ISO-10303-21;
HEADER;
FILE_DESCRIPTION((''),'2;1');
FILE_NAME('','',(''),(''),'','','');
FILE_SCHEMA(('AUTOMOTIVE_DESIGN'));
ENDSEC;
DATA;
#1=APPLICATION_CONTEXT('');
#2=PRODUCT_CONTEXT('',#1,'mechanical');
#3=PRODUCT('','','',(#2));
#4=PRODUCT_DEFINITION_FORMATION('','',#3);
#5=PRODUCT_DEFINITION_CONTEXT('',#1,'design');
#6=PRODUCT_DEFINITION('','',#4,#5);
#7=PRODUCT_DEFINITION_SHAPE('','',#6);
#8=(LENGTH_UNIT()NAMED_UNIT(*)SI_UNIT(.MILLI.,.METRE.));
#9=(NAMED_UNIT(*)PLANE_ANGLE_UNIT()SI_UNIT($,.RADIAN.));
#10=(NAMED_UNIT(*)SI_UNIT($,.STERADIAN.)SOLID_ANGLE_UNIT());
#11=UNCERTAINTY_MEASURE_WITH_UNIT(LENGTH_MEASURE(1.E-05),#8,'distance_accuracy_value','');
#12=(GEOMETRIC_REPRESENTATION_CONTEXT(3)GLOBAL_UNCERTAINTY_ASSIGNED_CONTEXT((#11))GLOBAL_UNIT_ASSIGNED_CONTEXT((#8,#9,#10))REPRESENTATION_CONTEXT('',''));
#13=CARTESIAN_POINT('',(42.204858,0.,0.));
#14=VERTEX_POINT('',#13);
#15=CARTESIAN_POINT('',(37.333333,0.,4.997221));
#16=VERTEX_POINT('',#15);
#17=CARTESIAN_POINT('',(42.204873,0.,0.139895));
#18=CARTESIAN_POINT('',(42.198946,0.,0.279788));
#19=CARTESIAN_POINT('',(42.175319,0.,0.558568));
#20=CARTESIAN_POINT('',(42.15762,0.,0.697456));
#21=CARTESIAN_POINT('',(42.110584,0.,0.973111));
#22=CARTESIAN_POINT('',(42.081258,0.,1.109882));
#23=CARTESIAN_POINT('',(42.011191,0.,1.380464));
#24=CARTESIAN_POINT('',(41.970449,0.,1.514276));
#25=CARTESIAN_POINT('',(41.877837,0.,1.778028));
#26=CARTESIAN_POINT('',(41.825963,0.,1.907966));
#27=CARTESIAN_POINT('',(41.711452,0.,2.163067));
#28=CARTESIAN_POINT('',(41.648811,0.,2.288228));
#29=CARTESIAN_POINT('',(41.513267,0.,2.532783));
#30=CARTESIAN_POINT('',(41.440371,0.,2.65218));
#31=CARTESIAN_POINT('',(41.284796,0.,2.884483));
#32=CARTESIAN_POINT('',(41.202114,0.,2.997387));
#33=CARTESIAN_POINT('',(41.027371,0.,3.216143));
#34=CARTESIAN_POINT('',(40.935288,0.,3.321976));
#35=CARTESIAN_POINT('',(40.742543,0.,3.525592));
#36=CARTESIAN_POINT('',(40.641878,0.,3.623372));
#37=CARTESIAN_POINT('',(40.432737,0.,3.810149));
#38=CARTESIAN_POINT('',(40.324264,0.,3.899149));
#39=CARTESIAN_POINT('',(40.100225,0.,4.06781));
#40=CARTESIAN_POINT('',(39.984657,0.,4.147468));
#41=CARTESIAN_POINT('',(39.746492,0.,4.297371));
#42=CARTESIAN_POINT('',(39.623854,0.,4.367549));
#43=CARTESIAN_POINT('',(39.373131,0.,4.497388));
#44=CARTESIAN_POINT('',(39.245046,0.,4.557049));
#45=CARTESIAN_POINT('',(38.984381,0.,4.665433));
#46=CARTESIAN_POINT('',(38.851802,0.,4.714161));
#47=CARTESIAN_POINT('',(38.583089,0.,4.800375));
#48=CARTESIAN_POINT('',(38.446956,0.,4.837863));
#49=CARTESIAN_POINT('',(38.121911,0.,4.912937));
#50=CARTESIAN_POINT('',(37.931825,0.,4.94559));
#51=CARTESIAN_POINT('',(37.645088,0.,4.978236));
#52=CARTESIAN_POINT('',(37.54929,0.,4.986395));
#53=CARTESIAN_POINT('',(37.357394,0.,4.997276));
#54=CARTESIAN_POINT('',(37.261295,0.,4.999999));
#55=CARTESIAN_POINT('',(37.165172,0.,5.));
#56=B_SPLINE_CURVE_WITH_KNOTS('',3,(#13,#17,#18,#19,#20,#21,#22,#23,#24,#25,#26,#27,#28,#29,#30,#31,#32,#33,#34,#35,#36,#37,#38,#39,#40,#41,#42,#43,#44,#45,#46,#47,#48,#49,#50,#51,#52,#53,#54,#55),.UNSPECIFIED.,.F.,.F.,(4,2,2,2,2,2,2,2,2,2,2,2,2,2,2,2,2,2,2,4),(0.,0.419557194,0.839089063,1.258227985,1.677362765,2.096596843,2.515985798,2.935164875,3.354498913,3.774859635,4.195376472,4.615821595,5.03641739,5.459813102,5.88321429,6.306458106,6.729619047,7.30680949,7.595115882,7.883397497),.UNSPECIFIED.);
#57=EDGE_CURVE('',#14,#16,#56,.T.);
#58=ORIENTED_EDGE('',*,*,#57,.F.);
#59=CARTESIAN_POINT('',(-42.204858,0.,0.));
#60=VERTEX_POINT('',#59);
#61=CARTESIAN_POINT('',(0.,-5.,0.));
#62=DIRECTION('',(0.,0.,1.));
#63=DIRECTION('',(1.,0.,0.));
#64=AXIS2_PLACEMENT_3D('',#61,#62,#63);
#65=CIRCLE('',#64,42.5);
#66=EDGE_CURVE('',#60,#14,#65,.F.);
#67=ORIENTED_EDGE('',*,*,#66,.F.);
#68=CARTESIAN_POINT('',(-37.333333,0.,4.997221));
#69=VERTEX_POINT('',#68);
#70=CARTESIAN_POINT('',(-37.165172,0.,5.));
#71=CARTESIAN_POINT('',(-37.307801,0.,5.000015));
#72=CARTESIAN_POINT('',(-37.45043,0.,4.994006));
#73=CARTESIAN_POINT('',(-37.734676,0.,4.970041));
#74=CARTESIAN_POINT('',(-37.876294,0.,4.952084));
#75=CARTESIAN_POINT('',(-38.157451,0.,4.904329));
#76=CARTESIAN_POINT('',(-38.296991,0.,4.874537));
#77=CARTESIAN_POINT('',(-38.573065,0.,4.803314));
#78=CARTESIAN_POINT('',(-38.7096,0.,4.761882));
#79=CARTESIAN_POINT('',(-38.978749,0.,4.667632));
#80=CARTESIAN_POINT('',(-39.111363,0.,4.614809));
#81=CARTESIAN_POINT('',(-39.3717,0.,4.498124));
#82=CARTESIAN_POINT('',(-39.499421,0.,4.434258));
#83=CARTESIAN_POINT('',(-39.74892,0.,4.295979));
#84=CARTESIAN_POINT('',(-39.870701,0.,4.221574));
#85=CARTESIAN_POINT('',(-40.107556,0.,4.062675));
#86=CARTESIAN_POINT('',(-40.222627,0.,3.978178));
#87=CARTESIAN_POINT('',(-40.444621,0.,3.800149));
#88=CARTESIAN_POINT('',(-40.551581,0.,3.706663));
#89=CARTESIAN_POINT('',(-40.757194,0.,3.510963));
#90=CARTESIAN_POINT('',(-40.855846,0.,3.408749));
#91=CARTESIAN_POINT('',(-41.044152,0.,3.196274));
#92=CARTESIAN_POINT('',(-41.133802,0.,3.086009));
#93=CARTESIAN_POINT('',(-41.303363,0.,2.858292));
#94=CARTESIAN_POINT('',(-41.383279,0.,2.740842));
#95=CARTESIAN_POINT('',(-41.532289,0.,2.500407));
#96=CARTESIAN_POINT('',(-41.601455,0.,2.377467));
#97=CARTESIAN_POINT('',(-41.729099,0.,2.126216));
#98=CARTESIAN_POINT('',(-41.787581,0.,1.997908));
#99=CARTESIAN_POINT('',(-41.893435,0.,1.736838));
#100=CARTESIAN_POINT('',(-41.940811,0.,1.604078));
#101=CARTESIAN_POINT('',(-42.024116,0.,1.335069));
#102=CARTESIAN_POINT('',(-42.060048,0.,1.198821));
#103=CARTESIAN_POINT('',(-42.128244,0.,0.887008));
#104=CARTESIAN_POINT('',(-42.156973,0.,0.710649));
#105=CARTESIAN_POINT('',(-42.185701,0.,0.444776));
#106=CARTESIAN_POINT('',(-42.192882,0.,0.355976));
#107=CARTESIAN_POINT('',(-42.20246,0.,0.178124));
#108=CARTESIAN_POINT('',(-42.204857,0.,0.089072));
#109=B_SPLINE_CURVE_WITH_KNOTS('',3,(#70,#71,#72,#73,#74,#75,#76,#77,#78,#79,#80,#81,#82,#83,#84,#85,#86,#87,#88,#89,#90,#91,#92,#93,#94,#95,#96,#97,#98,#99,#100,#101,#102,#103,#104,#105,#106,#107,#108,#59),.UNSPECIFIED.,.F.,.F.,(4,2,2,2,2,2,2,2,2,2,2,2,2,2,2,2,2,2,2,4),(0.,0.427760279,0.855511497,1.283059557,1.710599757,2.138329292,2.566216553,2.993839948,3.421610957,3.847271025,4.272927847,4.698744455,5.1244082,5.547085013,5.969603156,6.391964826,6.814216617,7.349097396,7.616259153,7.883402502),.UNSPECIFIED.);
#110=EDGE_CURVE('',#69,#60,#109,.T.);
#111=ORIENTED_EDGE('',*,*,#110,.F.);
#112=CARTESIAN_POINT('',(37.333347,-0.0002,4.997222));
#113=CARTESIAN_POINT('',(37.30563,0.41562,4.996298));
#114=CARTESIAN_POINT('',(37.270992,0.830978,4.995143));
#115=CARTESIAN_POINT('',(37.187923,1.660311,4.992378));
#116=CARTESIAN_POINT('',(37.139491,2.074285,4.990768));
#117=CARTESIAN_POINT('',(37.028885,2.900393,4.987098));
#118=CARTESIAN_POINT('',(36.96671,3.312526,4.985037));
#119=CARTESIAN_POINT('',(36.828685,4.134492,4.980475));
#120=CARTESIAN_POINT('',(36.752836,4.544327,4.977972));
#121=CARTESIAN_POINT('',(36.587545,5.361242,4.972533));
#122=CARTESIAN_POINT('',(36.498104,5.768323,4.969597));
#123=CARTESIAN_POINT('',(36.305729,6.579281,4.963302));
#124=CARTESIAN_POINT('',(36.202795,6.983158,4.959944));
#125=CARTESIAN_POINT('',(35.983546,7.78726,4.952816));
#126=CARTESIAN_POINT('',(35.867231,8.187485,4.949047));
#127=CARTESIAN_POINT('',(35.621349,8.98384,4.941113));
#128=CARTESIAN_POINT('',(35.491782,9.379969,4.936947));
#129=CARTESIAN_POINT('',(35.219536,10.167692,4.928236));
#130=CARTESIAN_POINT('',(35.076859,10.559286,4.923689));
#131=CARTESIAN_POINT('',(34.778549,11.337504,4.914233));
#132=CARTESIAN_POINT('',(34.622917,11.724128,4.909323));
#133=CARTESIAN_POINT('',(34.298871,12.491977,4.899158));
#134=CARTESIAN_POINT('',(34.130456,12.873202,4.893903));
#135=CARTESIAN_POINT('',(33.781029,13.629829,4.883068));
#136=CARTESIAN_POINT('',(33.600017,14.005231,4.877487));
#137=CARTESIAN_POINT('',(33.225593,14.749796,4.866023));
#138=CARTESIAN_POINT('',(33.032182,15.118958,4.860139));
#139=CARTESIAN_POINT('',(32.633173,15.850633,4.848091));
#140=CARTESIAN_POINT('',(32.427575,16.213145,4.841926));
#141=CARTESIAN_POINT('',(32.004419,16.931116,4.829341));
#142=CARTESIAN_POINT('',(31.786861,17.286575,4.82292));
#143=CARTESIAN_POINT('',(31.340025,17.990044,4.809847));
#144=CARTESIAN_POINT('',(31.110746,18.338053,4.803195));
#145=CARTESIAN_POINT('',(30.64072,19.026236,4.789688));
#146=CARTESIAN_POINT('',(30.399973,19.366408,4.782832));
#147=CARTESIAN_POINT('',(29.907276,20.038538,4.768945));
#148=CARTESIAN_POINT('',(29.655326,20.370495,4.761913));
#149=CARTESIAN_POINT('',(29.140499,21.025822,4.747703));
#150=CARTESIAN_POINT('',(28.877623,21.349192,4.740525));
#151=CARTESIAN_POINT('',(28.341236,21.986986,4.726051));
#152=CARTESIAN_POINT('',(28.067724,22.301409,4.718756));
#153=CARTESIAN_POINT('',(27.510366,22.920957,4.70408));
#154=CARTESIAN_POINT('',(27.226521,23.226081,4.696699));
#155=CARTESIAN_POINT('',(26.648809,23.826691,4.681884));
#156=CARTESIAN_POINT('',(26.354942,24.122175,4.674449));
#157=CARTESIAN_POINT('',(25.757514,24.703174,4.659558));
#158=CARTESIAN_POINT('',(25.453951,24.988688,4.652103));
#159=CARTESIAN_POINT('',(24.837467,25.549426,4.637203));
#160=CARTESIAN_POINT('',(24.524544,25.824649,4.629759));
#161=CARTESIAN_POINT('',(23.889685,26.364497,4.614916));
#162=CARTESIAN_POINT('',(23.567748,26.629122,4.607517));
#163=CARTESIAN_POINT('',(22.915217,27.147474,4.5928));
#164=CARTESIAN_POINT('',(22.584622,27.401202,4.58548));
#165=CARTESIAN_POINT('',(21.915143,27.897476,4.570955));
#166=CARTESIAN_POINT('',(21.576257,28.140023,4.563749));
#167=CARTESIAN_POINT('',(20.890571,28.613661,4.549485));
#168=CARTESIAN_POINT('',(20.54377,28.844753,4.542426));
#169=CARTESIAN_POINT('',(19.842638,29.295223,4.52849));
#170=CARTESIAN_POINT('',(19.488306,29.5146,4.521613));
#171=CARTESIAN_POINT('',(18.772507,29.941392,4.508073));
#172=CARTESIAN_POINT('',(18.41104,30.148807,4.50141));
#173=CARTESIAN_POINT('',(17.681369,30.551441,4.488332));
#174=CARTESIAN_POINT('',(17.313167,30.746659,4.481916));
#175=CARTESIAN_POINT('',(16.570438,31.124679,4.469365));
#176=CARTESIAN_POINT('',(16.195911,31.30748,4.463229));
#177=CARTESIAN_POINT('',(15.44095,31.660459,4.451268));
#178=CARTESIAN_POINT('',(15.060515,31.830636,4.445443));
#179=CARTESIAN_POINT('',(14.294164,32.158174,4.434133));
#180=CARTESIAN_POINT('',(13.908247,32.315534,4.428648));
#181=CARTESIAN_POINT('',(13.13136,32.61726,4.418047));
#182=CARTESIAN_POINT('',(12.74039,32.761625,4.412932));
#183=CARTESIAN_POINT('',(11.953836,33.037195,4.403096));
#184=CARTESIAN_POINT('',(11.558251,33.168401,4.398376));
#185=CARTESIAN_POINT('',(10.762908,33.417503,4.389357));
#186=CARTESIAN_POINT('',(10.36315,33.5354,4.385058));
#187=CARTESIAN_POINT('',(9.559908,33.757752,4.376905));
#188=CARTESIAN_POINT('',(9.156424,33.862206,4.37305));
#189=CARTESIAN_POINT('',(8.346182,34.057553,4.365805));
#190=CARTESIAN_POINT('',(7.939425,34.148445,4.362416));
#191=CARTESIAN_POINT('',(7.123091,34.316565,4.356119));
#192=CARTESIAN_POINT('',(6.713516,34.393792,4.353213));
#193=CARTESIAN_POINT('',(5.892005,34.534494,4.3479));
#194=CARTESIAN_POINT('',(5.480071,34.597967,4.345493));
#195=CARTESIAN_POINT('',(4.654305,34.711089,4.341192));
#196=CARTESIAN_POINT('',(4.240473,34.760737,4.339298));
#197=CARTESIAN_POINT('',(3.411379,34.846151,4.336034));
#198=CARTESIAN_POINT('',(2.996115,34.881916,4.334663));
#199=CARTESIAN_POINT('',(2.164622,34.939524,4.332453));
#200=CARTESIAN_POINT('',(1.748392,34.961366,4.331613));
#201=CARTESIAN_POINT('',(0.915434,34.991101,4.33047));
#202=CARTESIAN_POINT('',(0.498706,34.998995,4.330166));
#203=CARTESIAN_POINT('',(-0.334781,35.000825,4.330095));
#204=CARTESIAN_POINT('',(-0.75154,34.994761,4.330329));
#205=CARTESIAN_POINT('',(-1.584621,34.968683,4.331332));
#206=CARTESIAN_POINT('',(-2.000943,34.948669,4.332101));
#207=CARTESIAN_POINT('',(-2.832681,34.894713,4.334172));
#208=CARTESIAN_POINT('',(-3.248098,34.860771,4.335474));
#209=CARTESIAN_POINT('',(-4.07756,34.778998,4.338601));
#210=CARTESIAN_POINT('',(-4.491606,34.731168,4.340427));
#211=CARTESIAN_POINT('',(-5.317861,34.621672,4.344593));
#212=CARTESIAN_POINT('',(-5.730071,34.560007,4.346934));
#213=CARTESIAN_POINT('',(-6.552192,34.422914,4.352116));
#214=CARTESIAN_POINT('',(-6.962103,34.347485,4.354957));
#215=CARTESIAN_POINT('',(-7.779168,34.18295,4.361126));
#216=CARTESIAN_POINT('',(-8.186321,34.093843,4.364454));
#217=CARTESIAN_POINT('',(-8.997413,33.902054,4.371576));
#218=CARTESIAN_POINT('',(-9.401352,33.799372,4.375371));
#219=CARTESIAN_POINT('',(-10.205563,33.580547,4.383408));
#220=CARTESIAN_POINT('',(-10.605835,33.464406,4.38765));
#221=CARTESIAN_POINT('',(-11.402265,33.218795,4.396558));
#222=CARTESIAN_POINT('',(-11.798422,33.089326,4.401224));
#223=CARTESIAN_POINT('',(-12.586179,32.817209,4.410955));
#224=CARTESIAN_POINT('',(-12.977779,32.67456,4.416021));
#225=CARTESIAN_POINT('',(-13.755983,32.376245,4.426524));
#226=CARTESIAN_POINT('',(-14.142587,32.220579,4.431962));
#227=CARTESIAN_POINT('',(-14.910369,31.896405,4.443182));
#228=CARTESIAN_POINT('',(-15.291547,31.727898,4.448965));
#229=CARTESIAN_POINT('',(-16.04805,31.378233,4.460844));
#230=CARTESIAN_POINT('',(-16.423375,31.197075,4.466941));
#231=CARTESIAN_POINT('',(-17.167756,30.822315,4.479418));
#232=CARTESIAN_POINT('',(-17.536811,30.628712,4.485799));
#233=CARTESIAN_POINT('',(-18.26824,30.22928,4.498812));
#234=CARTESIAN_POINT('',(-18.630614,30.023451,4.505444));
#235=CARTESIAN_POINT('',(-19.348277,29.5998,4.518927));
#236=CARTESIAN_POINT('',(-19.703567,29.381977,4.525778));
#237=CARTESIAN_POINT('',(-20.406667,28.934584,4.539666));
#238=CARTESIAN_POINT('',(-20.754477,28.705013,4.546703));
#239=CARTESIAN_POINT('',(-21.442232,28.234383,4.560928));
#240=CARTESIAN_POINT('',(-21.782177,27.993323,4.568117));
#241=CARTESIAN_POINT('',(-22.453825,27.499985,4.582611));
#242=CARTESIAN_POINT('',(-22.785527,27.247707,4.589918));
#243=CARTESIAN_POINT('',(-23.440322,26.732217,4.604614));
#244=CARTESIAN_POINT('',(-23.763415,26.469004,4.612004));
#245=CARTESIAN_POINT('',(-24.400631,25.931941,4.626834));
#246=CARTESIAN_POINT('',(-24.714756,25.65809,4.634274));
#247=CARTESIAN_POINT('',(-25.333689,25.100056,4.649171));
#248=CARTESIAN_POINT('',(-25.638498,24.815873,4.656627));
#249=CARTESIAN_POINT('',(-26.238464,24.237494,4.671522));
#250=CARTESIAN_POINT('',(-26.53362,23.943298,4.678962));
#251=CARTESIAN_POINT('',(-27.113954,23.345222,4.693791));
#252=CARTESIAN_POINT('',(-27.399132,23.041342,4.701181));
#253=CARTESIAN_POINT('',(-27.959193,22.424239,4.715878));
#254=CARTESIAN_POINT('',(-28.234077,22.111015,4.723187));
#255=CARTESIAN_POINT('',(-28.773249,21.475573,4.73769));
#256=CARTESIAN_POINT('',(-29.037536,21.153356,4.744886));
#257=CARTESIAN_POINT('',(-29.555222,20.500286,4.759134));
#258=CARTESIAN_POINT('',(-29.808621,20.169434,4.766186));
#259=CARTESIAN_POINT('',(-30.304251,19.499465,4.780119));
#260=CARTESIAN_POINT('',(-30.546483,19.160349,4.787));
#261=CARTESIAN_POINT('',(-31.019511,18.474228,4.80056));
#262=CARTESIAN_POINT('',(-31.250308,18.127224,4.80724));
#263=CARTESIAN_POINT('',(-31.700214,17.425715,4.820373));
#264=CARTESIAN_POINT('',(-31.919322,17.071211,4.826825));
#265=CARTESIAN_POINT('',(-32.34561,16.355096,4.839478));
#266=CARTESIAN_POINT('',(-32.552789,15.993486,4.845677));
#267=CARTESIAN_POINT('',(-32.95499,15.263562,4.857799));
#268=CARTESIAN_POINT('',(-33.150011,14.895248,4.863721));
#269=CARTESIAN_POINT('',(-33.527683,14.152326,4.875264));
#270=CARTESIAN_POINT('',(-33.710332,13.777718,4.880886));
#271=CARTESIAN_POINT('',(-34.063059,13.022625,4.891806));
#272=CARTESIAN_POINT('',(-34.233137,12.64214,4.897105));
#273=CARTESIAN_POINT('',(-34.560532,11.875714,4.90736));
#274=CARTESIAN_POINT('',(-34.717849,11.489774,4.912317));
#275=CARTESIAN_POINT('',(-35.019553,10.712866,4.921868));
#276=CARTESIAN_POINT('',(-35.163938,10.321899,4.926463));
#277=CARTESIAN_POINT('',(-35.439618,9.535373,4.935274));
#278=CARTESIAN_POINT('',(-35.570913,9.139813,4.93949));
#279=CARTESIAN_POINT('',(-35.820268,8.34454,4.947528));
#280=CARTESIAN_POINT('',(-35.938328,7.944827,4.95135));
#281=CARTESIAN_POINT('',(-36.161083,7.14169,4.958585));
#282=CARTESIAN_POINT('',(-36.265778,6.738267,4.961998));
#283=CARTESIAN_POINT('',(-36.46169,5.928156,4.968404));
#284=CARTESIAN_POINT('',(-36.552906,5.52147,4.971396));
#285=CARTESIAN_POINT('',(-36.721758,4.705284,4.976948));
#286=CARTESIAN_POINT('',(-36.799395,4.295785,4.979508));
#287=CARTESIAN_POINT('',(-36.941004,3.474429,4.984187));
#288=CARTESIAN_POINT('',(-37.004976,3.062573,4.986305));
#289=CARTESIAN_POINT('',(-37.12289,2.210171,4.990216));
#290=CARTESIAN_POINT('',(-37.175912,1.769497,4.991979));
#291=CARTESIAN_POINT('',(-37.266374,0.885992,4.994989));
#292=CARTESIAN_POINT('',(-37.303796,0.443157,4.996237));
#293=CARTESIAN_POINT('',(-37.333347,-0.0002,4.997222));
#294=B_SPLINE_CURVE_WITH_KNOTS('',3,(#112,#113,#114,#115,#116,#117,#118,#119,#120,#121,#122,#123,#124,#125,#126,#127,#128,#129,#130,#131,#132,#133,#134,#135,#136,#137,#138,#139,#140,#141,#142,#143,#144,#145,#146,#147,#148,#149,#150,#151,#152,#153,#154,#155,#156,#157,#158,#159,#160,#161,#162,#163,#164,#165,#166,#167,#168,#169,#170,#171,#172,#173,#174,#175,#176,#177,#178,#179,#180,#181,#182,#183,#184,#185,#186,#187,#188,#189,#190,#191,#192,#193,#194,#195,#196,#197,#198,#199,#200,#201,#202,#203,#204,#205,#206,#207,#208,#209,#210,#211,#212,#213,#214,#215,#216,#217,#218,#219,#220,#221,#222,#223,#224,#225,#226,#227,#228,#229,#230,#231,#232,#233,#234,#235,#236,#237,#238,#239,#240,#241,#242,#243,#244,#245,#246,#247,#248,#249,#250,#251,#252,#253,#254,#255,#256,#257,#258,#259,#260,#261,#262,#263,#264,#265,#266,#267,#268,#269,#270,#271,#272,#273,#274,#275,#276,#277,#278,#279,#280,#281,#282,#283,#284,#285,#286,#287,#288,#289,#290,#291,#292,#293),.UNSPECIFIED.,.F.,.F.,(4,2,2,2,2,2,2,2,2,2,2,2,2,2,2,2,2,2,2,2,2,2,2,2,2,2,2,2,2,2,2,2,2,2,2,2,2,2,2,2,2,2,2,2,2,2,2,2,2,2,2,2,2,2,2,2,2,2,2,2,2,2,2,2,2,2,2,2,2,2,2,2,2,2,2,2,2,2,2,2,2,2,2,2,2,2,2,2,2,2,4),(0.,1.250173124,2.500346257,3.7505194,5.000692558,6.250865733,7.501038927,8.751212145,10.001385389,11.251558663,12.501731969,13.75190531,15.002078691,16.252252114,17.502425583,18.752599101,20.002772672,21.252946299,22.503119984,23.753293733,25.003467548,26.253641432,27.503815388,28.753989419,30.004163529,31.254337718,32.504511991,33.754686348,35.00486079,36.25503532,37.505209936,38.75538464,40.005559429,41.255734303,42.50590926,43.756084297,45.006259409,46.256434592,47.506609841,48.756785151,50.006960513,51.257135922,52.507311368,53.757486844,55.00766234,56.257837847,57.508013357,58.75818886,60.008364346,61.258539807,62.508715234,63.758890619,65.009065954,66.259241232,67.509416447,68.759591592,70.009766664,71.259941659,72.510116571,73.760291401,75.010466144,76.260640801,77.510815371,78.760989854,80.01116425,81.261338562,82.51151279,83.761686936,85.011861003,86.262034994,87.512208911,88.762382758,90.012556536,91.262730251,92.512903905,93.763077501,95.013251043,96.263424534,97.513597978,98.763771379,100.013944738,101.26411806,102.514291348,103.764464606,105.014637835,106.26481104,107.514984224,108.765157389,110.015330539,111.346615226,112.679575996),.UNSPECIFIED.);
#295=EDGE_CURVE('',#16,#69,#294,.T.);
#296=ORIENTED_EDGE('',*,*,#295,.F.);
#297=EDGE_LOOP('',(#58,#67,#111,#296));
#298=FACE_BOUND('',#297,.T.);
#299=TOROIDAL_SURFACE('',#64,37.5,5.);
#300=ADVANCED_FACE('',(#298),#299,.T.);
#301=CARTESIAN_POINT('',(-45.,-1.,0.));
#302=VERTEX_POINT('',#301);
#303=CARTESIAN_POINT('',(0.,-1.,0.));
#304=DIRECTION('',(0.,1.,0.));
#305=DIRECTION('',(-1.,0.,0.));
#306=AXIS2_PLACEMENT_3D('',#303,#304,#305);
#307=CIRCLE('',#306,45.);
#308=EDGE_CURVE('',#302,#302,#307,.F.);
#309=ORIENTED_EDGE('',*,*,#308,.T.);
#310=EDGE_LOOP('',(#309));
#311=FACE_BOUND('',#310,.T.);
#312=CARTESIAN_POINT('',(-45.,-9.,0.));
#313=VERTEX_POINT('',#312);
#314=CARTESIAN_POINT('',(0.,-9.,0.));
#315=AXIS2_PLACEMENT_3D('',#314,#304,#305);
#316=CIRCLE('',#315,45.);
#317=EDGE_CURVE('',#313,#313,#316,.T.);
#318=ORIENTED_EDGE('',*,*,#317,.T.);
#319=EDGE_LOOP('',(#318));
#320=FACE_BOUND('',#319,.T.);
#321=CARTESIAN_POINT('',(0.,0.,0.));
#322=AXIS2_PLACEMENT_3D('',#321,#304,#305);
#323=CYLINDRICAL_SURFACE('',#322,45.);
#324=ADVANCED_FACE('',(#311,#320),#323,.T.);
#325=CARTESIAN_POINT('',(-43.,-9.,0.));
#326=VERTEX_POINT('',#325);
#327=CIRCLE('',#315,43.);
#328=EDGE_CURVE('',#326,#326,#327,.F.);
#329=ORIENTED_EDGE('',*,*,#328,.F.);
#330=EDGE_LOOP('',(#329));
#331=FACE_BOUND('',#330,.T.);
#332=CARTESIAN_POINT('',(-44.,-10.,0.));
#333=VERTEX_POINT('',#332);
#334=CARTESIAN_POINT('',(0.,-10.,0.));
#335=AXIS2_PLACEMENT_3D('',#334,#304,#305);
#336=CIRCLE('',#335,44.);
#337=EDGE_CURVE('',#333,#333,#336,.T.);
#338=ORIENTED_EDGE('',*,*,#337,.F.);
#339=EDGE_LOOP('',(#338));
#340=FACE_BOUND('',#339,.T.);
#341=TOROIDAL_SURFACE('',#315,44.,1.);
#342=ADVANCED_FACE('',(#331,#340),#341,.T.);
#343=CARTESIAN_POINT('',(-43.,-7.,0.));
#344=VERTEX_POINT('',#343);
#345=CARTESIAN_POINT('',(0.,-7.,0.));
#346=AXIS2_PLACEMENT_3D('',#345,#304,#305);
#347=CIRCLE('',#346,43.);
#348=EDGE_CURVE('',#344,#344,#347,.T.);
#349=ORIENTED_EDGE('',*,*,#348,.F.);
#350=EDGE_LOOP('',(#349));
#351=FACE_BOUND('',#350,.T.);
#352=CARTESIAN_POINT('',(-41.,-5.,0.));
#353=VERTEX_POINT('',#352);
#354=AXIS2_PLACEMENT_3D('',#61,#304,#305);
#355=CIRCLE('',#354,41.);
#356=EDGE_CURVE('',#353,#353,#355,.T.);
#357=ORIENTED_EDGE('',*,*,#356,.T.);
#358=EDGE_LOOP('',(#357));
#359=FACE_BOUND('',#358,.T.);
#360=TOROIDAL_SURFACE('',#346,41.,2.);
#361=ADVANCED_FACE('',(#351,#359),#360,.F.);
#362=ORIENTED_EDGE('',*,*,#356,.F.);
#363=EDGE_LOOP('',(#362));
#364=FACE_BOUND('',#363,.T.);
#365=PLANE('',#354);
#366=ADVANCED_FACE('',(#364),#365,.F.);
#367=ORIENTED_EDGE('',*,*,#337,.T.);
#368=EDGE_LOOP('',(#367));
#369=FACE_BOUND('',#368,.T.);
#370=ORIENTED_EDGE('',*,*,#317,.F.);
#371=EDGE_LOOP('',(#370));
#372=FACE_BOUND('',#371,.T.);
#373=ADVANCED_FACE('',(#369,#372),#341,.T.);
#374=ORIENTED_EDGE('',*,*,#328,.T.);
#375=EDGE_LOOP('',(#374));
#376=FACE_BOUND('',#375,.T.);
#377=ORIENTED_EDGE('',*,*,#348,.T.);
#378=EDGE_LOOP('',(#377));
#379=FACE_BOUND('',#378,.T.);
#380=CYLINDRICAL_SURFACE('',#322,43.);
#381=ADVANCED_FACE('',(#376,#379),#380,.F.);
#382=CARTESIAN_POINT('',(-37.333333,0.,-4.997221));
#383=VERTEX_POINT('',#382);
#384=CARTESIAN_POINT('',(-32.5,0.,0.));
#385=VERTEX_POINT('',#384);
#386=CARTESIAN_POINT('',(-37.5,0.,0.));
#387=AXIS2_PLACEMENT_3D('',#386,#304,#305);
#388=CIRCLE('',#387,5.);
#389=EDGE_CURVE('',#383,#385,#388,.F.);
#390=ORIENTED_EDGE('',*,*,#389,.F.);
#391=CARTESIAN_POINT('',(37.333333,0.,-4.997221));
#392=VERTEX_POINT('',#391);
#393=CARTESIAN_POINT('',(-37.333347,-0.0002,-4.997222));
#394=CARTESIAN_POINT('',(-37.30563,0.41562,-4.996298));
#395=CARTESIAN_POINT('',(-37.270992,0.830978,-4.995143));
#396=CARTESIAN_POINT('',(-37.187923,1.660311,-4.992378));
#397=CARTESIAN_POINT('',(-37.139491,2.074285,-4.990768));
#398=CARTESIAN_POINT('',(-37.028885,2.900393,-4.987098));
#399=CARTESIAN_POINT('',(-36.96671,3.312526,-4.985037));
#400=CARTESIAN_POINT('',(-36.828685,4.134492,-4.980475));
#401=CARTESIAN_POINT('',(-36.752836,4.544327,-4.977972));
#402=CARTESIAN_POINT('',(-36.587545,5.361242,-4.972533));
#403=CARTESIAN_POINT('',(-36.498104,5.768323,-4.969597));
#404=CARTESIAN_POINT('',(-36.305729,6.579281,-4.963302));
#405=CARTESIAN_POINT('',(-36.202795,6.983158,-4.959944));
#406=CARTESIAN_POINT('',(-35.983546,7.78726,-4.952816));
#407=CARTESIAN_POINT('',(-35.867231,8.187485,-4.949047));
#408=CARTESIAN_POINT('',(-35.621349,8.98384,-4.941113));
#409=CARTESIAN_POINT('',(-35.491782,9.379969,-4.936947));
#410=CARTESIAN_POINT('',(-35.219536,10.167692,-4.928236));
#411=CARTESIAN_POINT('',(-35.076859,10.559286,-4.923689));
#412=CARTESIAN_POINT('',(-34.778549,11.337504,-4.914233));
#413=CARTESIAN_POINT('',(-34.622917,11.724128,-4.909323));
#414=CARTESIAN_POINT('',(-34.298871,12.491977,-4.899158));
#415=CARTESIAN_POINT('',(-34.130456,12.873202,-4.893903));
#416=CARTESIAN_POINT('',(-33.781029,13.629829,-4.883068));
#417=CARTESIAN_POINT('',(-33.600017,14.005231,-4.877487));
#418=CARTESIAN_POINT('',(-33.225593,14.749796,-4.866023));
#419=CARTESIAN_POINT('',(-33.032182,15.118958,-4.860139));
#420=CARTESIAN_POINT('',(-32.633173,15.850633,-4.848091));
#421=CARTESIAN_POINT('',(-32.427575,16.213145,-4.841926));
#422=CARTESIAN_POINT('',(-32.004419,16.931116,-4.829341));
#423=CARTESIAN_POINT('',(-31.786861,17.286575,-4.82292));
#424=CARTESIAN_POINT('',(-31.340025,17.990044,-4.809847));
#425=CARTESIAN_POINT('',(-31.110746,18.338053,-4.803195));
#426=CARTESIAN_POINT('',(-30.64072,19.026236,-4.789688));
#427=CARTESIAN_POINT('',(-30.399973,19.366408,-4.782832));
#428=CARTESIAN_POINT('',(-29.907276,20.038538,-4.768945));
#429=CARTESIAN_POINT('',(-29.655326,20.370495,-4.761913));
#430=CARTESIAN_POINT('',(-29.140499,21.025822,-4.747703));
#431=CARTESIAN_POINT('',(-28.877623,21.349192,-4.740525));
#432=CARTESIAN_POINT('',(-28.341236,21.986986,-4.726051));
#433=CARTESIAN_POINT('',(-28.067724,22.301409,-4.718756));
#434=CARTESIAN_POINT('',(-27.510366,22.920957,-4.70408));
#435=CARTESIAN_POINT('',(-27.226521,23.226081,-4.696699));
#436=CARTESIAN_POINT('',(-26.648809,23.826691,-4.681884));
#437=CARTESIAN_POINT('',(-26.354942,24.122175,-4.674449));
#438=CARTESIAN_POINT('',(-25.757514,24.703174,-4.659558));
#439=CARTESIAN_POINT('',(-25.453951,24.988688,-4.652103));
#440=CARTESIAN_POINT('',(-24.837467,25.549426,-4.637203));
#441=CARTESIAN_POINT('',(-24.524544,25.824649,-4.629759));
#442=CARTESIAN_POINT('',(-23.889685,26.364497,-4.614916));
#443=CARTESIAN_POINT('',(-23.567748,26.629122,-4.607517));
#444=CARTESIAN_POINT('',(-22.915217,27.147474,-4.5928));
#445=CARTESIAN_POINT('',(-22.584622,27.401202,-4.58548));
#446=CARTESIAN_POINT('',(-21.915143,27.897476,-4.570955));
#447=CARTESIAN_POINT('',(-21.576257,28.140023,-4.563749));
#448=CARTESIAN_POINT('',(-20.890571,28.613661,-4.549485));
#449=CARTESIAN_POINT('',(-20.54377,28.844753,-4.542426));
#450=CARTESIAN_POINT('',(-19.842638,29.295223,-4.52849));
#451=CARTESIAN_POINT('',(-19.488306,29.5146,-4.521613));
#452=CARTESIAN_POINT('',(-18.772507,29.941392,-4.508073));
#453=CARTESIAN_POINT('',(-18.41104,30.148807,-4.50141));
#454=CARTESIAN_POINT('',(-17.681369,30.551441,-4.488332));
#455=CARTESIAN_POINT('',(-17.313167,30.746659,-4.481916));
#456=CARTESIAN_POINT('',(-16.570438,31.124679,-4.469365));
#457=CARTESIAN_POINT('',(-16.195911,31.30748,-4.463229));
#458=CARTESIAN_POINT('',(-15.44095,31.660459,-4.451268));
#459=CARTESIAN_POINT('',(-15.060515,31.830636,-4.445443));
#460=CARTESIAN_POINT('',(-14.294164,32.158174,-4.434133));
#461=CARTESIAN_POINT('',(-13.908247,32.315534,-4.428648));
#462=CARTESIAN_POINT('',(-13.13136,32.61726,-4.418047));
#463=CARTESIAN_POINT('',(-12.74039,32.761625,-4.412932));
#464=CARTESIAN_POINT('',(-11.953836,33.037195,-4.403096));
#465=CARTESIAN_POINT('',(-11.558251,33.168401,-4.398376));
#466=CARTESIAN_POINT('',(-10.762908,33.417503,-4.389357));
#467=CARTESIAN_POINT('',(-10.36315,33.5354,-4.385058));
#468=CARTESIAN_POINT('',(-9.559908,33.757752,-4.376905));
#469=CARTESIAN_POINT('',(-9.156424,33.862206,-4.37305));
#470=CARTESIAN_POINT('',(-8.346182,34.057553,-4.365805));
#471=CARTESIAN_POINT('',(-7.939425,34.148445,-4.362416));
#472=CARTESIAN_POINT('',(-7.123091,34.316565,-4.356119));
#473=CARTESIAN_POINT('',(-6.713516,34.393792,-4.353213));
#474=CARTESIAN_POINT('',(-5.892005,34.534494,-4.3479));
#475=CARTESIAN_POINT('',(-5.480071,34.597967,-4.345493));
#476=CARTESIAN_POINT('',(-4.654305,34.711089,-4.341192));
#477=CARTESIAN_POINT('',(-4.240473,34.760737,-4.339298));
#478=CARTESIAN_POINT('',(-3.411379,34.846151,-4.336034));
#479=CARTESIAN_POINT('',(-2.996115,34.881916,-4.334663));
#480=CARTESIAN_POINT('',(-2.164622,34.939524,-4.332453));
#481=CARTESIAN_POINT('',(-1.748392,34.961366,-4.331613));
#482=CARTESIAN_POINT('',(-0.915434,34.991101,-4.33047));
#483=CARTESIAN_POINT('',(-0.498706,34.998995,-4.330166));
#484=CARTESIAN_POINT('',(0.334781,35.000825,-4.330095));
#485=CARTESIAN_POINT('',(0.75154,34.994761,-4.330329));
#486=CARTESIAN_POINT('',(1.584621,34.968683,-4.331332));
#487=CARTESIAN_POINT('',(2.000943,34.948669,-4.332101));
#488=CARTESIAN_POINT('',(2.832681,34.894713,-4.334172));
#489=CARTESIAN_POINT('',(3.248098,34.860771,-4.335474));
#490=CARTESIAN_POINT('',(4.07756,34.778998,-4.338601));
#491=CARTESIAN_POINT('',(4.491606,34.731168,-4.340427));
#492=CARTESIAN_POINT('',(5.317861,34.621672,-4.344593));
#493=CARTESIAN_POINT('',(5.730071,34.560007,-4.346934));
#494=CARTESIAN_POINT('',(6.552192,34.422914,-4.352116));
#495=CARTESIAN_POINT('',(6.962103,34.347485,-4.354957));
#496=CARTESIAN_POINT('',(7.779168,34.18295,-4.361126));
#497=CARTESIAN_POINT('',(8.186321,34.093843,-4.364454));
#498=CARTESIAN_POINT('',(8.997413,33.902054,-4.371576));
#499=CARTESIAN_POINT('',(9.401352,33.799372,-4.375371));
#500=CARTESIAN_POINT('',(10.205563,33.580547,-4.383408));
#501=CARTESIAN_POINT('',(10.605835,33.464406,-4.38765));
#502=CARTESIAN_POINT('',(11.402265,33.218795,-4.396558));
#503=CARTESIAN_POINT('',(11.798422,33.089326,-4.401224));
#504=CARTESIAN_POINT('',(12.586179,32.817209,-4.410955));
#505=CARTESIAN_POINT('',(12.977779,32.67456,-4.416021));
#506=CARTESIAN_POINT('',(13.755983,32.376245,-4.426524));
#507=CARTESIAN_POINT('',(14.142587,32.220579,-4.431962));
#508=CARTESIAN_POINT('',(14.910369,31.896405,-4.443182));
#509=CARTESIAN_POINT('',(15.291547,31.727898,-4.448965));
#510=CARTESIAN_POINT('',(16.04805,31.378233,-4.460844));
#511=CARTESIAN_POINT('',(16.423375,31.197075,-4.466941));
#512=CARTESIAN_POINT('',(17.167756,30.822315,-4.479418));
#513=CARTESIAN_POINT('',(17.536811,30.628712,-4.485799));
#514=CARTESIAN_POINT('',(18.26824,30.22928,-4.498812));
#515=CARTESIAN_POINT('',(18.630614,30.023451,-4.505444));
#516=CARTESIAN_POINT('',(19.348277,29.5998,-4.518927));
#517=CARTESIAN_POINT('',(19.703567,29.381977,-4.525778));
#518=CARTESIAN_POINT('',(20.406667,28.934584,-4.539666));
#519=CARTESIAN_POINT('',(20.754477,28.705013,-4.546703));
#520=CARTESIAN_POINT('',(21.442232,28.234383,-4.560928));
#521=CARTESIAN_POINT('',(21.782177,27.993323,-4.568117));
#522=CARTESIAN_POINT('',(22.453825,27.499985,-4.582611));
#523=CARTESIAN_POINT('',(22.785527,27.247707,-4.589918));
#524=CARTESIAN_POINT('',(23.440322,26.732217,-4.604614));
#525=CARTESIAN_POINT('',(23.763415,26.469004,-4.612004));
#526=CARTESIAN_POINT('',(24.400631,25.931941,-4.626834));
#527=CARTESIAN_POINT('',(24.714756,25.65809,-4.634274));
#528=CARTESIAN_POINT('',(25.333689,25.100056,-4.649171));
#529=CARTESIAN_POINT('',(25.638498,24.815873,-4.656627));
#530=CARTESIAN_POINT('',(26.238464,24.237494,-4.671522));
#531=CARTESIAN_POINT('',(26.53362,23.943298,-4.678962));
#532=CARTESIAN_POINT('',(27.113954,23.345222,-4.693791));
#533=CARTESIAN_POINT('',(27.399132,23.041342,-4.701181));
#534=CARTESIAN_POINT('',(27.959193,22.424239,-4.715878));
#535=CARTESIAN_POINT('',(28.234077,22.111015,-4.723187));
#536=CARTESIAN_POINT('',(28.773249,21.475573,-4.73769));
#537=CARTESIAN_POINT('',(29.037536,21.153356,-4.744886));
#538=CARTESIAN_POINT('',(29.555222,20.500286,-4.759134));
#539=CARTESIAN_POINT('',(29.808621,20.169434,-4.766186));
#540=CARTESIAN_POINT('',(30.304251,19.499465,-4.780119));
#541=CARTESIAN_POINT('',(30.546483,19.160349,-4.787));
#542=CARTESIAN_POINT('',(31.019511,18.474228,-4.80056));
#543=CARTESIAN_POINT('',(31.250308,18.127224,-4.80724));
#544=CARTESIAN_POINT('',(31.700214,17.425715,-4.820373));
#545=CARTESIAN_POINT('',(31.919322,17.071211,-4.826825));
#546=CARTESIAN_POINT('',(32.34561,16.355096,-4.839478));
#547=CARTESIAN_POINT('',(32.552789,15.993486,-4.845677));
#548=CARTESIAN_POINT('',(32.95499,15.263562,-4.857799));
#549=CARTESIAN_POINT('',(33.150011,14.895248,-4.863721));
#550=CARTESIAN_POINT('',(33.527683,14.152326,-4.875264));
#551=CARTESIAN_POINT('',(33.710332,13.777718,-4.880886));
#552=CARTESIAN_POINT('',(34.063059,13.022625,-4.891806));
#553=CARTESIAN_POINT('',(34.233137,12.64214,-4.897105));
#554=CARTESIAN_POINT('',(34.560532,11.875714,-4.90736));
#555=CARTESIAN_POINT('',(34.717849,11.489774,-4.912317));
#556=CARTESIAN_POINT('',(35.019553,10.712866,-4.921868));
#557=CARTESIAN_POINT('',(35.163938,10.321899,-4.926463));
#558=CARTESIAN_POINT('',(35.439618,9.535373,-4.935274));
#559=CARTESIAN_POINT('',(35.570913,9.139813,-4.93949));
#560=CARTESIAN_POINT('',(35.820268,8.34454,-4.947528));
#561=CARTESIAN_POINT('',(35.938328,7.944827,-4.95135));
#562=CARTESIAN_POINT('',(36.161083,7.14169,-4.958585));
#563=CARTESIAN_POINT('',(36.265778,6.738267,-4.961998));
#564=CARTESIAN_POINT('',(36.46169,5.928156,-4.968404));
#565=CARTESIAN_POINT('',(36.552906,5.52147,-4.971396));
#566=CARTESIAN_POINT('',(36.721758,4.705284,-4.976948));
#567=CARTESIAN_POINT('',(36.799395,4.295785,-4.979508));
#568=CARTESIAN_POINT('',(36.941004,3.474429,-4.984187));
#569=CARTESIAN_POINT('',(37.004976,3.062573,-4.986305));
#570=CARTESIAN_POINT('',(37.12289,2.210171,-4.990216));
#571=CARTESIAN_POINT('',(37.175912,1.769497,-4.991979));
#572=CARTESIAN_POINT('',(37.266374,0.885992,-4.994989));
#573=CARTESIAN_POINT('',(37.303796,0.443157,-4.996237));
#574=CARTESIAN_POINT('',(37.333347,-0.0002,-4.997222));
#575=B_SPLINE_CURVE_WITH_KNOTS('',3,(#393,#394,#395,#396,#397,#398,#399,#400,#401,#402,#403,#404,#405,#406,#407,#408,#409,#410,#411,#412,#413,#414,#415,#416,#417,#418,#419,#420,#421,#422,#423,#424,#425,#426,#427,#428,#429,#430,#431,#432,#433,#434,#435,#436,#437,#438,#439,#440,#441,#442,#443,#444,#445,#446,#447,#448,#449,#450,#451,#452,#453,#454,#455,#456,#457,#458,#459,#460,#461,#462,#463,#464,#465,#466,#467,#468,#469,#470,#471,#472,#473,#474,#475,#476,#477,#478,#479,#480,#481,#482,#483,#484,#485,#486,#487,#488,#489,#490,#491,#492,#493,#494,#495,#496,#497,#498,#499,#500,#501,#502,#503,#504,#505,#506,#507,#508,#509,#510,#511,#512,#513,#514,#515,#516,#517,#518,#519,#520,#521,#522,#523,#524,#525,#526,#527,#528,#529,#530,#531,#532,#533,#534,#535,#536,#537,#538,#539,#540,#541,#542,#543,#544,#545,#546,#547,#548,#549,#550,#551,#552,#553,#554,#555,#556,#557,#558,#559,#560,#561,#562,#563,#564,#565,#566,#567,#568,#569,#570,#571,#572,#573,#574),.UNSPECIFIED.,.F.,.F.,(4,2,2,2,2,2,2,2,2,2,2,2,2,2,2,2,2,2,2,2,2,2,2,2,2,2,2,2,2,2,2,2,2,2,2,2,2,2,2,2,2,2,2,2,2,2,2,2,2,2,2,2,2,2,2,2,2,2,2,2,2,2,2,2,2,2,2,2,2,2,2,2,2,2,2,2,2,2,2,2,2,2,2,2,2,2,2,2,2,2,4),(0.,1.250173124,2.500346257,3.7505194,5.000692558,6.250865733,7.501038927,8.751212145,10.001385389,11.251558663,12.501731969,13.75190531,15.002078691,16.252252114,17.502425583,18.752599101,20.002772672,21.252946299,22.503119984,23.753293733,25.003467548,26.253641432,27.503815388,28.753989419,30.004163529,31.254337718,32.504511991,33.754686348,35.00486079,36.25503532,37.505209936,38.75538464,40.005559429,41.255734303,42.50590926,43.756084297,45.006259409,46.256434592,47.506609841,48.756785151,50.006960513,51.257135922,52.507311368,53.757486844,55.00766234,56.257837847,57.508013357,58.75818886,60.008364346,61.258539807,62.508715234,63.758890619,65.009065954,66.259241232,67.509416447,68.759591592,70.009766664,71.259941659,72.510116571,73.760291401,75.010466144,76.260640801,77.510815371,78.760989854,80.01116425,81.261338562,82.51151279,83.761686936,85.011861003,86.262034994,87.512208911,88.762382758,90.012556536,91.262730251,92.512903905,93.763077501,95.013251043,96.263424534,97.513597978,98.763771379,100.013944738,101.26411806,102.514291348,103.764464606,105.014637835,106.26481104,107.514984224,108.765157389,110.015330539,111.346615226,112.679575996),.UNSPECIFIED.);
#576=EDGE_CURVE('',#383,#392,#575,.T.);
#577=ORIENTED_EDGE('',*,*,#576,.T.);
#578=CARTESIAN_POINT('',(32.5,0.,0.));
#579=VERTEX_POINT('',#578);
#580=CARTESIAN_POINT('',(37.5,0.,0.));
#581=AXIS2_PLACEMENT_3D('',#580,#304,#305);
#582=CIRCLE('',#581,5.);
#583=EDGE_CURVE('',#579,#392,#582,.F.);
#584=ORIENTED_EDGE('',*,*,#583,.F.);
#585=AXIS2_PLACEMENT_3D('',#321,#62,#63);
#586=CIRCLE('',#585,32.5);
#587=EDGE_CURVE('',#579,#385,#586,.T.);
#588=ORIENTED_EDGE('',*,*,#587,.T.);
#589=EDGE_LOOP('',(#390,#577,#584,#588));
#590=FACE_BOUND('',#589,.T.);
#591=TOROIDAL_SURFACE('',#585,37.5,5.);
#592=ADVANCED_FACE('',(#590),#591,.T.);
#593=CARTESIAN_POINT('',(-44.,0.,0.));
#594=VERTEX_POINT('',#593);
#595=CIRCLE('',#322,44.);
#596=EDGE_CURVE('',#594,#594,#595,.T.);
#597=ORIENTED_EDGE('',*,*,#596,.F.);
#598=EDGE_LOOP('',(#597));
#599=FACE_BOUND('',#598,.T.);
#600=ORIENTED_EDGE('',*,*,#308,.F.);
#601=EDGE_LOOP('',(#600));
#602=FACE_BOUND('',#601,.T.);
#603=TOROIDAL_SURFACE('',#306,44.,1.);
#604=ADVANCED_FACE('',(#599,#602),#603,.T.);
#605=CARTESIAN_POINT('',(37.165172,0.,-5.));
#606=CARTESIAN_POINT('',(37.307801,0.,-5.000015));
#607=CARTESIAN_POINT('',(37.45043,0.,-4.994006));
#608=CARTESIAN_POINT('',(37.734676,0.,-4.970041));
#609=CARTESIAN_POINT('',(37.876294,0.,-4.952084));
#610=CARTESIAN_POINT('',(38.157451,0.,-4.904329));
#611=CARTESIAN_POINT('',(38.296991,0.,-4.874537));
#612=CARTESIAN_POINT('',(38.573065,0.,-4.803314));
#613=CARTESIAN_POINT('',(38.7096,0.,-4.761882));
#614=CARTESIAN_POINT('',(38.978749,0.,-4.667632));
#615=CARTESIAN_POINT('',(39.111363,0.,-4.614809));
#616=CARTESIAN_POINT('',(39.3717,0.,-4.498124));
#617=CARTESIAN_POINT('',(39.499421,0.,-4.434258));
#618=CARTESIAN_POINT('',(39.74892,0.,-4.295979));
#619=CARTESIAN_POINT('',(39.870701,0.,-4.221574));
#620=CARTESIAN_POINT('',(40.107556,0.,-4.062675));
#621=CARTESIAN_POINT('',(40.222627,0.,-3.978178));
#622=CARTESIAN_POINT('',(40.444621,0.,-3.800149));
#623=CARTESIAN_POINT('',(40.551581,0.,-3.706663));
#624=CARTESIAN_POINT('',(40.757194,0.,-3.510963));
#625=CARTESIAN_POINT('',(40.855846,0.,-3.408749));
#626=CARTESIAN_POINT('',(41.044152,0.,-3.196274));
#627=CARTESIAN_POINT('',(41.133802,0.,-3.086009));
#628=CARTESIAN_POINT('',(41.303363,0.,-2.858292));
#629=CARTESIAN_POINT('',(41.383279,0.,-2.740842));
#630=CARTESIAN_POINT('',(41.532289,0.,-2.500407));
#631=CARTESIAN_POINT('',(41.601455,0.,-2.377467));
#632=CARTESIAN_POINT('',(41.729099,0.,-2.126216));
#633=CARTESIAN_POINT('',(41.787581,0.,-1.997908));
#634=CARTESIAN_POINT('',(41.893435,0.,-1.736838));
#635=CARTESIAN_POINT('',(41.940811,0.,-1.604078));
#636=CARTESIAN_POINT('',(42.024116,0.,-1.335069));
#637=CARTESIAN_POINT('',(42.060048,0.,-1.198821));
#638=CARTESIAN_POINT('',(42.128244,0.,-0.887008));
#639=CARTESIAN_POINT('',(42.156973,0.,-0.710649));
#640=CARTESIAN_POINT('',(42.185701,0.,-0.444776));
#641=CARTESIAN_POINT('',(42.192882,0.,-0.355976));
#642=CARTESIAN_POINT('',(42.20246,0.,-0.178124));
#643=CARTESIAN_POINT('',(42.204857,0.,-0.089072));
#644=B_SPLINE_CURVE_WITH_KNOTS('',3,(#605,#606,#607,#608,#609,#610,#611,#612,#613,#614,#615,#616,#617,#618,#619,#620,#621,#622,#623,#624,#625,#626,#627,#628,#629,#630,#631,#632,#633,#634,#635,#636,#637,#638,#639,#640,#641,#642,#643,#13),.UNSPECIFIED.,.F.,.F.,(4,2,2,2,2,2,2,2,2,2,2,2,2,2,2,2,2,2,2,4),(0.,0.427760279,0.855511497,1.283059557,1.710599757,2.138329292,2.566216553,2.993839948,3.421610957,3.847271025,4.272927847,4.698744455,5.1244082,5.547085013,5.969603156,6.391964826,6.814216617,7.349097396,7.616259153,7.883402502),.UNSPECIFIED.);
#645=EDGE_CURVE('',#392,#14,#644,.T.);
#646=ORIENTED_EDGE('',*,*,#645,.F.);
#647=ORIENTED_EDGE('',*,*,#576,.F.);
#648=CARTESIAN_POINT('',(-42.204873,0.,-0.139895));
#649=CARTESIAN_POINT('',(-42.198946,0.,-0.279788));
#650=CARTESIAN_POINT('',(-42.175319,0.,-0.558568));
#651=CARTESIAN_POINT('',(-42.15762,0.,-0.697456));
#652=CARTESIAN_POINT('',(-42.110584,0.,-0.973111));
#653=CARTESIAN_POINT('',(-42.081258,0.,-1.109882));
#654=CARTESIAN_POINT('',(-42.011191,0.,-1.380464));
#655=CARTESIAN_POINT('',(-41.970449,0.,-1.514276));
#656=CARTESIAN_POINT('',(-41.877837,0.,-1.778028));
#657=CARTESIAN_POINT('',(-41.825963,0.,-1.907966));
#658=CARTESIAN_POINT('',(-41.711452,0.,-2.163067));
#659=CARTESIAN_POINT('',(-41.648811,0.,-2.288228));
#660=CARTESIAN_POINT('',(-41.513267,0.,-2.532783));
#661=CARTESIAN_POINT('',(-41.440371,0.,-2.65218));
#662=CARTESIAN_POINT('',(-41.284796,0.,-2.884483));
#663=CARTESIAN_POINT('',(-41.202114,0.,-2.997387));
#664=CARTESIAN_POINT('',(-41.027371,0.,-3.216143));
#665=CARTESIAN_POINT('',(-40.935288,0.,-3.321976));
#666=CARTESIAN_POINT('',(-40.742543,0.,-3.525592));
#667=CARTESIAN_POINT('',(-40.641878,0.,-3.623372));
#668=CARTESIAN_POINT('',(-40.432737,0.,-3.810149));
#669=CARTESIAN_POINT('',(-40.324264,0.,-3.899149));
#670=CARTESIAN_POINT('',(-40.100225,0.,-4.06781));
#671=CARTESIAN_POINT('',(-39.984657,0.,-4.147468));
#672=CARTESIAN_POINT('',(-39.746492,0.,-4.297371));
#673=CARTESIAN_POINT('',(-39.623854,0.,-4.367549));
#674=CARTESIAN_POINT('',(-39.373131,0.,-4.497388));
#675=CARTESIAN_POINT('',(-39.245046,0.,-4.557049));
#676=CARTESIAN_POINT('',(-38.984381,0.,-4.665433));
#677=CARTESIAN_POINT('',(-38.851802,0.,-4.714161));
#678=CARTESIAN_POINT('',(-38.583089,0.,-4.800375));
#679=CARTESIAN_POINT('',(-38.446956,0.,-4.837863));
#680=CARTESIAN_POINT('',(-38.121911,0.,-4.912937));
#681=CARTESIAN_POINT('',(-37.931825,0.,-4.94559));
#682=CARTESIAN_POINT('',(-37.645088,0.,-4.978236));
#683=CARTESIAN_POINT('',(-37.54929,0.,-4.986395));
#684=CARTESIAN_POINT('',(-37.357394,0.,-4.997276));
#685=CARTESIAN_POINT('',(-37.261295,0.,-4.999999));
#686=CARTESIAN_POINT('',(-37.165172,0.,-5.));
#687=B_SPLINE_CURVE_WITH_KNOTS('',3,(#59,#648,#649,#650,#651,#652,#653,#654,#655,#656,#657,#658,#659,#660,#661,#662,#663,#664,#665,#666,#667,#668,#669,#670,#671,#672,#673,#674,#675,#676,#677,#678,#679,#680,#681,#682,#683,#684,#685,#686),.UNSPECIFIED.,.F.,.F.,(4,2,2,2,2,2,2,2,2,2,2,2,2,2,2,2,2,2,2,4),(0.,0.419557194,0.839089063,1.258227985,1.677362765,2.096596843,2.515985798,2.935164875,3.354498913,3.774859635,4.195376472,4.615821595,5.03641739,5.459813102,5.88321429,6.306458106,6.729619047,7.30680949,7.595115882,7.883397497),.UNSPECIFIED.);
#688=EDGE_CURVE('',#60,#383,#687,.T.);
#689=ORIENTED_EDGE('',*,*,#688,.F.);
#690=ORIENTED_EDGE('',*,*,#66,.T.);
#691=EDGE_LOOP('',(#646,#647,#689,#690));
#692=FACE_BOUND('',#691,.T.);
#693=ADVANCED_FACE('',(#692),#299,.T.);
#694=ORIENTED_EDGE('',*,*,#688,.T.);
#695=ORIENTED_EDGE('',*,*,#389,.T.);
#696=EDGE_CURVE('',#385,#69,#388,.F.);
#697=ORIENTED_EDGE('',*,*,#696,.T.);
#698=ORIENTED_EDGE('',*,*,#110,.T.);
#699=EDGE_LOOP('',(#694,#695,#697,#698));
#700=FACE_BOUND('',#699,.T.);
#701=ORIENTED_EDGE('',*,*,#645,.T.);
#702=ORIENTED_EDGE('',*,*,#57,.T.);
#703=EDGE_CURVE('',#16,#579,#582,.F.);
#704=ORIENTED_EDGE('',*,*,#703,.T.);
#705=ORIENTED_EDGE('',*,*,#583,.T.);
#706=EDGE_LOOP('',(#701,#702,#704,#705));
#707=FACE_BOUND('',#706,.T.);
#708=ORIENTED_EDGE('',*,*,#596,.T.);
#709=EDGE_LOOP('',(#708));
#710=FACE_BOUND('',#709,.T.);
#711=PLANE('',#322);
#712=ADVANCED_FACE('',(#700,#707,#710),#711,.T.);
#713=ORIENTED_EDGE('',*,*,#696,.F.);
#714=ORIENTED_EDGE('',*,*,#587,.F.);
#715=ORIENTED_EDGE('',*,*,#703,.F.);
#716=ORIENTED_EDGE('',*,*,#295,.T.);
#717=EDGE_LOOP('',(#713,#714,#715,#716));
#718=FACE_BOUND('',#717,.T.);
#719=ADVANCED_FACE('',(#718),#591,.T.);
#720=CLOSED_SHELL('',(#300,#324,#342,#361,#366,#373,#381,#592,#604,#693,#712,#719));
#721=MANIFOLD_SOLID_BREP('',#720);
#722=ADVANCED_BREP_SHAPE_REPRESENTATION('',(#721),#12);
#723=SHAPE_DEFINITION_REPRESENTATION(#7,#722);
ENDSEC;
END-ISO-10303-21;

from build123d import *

# Parameters (mm, degrees)
BOSS_EXTRUDE1_DEPTH = 10
FILLET1_R           = 5
FILLET2_R           = 1


# Some blends are built 0.0001 mm under size
with BuildPart() as part:
    # Sketch1 → Revolve1 (revolve)
    with BuildSketch(Plane.XY, mode=Mode.PRIVATE) as revolve1_sk:
        with BuildLine():
            Line((45, 0), (0, 0))
            Line((0, 0), (0, -5))
            Line((0, -5), (41, -5))
            ThreePointArc((41, -5), (42.414213562, -5.585786438), (43, -7))
            Line((43, -7), (43, -10))
            Line((43, -10), (45, -10))
            Line((45, -10), (45, 0))
        make_face()
    revolve(revolve1_sk.sketch.rotate(Axis((0, 0, 0), (0, -1, 0)), 180), axis=Axis((0, 0, 0), (0, -1, 0)))

    # Sketch2 → Boss-Extrude1 (add)
    with BuildSketch(Plane.XY.offset(5)):
        with BuildLine():
            ThreePointArc((42.20485754, 0), (0, 37.5), (-42.20485754, 0))
            Line((-42.20485754, 0), (-32.5, 0))
            ThreePointArc((-32.5, 0), (0, 32.5), (32.5, 0))
            Line((32.5, 0), (42.20485754, 0))
        make_face()
    extrude(amount=-BOSS_EXTRUDE1_DEPTH)

    # Fillet1
    # the kernel refuses this fillet: 5 mm, written as the material it takes off along each edge
    with BuildSketch(Plane(origin=(0, 0, -5), x_dir=(-1, 0, 0), z_dir=(0, -1, 0))) as fillet1_piece_1:
        with BuildLine():
            CenterArc((32.5 + FILLET1_R, -FILLET1_R), FILLET1_R, 90, 90)
            Line((32.5 + FILLET1_R, 0), (32.5 + FILLET1_R, FILLET1_R * 0.02))
            Line((32.5 + FILLET1_R, FILLET1_R * 0.02), (32.5 - FILLET1_R * 0.02, FILLET1_R * 0.02))
            Line((32.5 - FILLET1_R * 0.02, FILLET1_R * 0.02), (32.5 - FILLET1_R * 0.02, -FILLET1_R))
            Line((32.5 - FILLET1_R * 0.02, -FILLET1_R), (32.5, -FILLET1_R))
        make_face()
    revolve(axis=Axis((0, 0, -5), (0, 0, -1)), revolution_arc=180, mode=Mode.SUBTRACT)
    with BuildSketch(Plane(origin=(0, 0, 5), x_dir=(-1, 0, 0), z_dir=(0, -1, 0))) as fillet1_piece_2:
        with BuildLine():
            CenterArc((32.5 + FILLET1_R, FILLET1_R), FILLET1_R, 180, 90)
            Line((32.5, FILLET1_R), (32.5 - FILLET1_R * 0.02, FILLET1_R))
            Line((32.5 - FILLET1_R * 0.02, FILLET1_R), (32.5 - FILLET1_R * 0.02, -FILLET1_R * 0.02))
            Line((32.5 - FILLET1_R * 0.02, -FILLET1_R * 0.02), (32.5 + FILLET1_R, -FILLET1_R * 0.02))
            Line((32.5 + FILLET1_R, -FILLET1_R * 0.02), (32.5 + FILLET1_R, 0))
        make_face()
    revolve(axis=Axis((0, 0, 5), (0, 0, -1)), revolution_arc=180, mode=Mode.SUBTRACT)
    with BuildSketch(Plane(origin=(0, -5, -5), x_dir=(0.9844463409038275, -0.1756855198389009, 0), z_dir=(-0.1756855198389009, -0.9844463409038275, 0))) as fillet1_piece_3_section:
        with BuildLine():
            CenterArc((42.5 - FILLET1_R, FILLET1_R), FILLET1_R, 270, 90)
            Line((42.5, FILLET1_R), (42.5 + FILLET1_R * 0.02, FILLET1_R))
            Line((42.5 + FILLET1_R * 0.02, FILLET1_R), (42.5 + FILLET1_R * 0.02, -FILLET1_R * 0.02))
            Line((42.5 + FILLET1_R * 0.02, -FILLET1_R * 0.02), (42.5 - FILLET1_R, -FILLET1_R * 0.02))
            Line((42.5 - FILLET1_R, -FILLET1_R * 0.02), (42.5 - FILLET1_R, 0))
        make_face()
    fillet1_piece_3 = revolve(axis=Axis((0, -5, -5), (0, 0, 1)), revolution_arc=200.23710717, mode=Mode.PRIVATE)
    fillet1_piece_3 = split(fillet1_piece_3, bisect_by=Plane(origin=(0, 0, -3.60019313), z_dir=(0, 1, 0)), keep=Keep.TOP, mode=Mode.PRIVATE)
    add(fillet1_piece_3, mode=Mode.SUBTRACT)
    with BuildSketch(Plane(origin=(0, -5, 5), x_dir=(0.9844463409038275, -0.1756855198389009, 0), z_dir=(-0.1756855198389009, -0.9844463409038275, 0))) as fillet1_piece_4_section:
        with BuildLine():
            CenterArc((42.5 - FILLET1_R, -FILLET1_R), FILLET1_R, 0, 90)
            Line((42.5, -FILLET1_R), (42.5 + FILLET1_R * 0.02, -FILLET1_R))
            Line((42.5 + FILLET1_R * 0.02, -FILLET1_R), (42.5 + FILLET1_R * 0.02, FILLET1_R * 0.02))
            Line((42.5 + FILLET1_R * 0.02, FILLET1_R * 0.02), (42.5 - FILLET1_R, FILLET1_R * 0.02))
            Line((42.5 - FILLET1_R, FILLET1_R * 0.02), (42.5 - FILLET1_R, 0))
        make_face()
    fillet1_piece_4 = revolve(axis=Axis((0, -5, 5), (0, 0, 1)), revolution_arc=200.23710717, mode=Mode.PRIVATE)
    fillet1_piece_4 = split(fillet1_piece_4, bisect_by=Plane(origin=(0, 0, 3.60019313), z_dir=(0, 1, 0)), keep=Keep.TOP, mode=Mode.PRIVATE)
    add(fillet1_piece_4, mode=Mode.SUBTRACT)

    # Fillet2
    fillet2_edges = [part.edges().sort_by_distance(p)[0] for p in [
        (45, 0, 0),
        (45, -10, 0),
        (43, -10, 0),
    ]]
    fillet(fillet2_edges, radius=FILLET2_R - 0.0001)  # a hair under: the kernel refuses the full size


solid = part.part
